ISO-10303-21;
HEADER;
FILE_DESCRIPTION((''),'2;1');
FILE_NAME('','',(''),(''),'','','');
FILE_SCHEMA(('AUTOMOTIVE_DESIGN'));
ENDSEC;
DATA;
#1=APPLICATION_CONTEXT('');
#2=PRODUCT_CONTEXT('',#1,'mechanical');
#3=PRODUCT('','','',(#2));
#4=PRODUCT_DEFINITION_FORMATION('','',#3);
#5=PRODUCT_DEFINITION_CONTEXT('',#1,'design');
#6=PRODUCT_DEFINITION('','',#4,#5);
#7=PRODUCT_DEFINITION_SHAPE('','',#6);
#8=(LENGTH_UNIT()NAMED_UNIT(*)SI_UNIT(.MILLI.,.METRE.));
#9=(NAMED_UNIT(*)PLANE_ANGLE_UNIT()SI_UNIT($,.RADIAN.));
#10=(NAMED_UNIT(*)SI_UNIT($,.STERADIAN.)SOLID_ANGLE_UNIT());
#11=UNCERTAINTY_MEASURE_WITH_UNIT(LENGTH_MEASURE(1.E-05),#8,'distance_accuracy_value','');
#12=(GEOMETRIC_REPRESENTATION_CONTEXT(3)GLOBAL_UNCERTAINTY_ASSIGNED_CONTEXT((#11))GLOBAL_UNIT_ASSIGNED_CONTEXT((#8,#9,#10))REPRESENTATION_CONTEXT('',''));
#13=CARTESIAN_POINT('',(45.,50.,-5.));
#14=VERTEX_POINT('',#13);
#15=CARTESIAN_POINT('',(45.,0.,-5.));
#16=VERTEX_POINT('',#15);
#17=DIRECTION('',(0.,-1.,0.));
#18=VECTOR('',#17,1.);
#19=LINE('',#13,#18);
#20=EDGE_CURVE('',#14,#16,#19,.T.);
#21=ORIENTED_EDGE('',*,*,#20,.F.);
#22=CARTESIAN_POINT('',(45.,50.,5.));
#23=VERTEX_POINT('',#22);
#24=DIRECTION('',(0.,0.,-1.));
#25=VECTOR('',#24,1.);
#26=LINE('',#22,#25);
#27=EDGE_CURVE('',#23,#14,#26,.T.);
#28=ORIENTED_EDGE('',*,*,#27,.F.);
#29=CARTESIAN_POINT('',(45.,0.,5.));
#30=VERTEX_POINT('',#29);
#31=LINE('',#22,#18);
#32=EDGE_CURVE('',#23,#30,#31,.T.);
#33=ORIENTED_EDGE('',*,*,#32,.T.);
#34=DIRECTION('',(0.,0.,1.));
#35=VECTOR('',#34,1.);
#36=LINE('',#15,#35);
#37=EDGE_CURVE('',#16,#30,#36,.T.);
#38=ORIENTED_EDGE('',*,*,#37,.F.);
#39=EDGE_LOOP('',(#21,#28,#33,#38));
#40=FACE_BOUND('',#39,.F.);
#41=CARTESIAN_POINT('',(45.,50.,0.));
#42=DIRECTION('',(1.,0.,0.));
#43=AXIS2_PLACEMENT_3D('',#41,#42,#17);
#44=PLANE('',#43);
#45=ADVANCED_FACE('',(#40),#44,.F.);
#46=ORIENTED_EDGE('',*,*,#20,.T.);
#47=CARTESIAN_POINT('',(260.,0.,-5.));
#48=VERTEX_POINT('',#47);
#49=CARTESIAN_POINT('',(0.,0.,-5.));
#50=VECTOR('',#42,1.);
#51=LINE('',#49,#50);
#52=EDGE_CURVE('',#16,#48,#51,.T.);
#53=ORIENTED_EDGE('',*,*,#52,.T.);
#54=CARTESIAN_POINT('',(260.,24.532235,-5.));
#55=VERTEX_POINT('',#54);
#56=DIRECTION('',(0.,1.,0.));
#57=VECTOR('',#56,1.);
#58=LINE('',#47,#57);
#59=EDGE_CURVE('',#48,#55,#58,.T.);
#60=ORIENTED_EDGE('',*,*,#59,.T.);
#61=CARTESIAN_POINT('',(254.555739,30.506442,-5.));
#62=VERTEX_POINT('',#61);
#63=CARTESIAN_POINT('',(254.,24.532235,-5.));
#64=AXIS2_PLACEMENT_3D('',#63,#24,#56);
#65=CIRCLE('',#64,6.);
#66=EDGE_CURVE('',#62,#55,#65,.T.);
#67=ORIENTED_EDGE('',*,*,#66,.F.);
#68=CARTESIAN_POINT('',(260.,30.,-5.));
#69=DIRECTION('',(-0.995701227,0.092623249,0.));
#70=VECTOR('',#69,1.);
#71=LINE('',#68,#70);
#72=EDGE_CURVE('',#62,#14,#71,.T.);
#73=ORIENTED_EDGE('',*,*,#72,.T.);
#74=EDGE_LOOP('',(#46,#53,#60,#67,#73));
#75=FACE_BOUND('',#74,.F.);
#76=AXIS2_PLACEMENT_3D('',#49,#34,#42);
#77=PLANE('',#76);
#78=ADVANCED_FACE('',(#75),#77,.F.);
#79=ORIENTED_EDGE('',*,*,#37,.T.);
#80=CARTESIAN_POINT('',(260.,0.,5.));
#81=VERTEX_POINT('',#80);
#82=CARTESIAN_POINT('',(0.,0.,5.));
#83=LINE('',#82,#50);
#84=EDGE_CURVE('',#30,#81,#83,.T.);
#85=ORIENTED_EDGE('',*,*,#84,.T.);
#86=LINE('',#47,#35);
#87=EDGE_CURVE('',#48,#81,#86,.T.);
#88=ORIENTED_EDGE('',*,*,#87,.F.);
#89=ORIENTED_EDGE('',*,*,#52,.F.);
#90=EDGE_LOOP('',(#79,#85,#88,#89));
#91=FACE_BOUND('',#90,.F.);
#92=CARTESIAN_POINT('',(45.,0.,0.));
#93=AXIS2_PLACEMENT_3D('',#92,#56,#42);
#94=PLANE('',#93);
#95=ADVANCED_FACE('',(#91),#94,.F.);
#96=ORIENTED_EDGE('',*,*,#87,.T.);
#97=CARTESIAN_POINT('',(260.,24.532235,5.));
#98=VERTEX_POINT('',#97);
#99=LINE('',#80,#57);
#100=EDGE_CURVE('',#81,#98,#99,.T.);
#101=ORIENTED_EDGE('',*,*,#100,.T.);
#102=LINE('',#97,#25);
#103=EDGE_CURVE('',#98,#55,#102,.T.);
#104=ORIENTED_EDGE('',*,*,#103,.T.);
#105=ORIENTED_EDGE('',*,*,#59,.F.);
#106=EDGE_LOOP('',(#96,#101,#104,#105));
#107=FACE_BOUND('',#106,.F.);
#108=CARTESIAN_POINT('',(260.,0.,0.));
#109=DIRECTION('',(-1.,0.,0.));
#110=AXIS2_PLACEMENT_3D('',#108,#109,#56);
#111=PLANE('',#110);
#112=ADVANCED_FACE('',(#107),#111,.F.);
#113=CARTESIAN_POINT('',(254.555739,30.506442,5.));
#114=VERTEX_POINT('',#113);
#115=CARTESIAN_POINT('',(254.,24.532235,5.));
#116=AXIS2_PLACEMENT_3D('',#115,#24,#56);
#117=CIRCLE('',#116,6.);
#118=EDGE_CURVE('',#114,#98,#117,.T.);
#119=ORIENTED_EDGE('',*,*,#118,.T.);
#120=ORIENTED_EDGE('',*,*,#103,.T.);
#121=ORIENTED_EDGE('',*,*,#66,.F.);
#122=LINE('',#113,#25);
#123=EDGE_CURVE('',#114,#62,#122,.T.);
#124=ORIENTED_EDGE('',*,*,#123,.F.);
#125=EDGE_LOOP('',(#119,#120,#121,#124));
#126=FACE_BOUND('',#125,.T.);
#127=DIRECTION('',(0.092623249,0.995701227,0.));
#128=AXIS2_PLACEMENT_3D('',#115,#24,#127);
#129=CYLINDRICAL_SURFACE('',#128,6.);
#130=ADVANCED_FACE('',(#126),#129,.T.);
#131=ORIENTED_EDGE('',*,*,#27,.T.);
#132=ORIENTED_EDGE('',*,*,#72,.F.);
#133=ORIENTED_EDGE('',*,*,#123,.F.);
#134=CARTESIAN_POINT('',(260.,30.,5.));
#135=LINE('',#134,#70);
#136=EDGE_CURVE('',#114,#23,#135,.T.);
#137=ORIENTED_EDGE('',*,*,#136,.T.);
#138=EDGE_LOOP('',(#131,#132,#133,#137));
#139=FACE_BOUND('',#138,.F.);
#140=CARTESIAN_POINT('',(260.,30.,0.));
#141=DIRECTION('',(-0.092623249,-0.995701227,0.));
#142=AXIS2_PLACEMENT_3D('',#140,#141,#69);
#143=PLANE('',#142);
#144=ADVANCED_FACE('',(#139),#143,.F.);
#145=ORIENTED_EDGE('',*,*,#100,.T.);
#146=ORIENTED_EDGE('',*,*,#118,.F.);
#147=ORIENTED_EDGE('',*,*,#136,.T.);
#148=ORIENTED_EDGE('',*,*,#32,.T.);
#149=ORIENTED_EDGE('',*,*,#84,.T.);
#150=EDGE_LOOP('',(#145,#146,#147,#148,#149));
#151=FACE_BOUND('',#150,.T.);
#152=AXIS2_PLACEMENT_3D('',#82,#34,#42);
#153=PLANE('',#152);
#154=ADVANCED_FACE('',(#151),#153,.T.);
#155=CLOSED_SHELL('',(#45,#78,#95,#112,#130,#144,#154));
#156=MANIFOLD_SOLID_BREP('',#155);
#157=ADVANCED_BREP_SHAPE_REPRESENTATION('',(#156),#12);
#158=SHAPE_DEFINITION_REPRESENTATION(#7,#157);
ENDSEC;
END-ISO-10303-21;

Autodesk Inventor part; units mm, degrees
ref_plane "YZ Plane" through (0, 0, 0) normal (1, 0, 0) x (0, 1, 0)
ref_plane "XZ Plane" through (0, 0, 0) normal (0, 1, 0) x (-1, 0, 0)
ref_plane "XY Plane" through (0, 0, 0) normal (0, 0, 1) x (1, 0, 0)
sketch "Sketch3" plane through (0, 0, 0) normal (0, 0, 1) x (1, 0, 0)
  line L0 (0, 0) -> (260, 0)
  line L1 (260, 0) -> (260, 30)
  line L2 (260, 30) -> (-45.1628, 58.3872)
  line L3 (45, 50) -> (45, 0)
  dimension "d11" = 260
  dimension "d12" = 30
  dimension "d13" = 45
  dimension "d14" = 50
extrude "Plate1" add sketch "Sketch3" along normal mid plane 10
fillet "Corner Round1" radius 6 1 edges at (260, 30, 0)
equation "\"d15\" = Thickness"
equation "\"BendReliefDepth\" = 0.5 * Thickness"
equation "\"Thickness\" = 10"
properties part number "PRS 1200-23 charging hatch reinf 500mm" material "Steel"
